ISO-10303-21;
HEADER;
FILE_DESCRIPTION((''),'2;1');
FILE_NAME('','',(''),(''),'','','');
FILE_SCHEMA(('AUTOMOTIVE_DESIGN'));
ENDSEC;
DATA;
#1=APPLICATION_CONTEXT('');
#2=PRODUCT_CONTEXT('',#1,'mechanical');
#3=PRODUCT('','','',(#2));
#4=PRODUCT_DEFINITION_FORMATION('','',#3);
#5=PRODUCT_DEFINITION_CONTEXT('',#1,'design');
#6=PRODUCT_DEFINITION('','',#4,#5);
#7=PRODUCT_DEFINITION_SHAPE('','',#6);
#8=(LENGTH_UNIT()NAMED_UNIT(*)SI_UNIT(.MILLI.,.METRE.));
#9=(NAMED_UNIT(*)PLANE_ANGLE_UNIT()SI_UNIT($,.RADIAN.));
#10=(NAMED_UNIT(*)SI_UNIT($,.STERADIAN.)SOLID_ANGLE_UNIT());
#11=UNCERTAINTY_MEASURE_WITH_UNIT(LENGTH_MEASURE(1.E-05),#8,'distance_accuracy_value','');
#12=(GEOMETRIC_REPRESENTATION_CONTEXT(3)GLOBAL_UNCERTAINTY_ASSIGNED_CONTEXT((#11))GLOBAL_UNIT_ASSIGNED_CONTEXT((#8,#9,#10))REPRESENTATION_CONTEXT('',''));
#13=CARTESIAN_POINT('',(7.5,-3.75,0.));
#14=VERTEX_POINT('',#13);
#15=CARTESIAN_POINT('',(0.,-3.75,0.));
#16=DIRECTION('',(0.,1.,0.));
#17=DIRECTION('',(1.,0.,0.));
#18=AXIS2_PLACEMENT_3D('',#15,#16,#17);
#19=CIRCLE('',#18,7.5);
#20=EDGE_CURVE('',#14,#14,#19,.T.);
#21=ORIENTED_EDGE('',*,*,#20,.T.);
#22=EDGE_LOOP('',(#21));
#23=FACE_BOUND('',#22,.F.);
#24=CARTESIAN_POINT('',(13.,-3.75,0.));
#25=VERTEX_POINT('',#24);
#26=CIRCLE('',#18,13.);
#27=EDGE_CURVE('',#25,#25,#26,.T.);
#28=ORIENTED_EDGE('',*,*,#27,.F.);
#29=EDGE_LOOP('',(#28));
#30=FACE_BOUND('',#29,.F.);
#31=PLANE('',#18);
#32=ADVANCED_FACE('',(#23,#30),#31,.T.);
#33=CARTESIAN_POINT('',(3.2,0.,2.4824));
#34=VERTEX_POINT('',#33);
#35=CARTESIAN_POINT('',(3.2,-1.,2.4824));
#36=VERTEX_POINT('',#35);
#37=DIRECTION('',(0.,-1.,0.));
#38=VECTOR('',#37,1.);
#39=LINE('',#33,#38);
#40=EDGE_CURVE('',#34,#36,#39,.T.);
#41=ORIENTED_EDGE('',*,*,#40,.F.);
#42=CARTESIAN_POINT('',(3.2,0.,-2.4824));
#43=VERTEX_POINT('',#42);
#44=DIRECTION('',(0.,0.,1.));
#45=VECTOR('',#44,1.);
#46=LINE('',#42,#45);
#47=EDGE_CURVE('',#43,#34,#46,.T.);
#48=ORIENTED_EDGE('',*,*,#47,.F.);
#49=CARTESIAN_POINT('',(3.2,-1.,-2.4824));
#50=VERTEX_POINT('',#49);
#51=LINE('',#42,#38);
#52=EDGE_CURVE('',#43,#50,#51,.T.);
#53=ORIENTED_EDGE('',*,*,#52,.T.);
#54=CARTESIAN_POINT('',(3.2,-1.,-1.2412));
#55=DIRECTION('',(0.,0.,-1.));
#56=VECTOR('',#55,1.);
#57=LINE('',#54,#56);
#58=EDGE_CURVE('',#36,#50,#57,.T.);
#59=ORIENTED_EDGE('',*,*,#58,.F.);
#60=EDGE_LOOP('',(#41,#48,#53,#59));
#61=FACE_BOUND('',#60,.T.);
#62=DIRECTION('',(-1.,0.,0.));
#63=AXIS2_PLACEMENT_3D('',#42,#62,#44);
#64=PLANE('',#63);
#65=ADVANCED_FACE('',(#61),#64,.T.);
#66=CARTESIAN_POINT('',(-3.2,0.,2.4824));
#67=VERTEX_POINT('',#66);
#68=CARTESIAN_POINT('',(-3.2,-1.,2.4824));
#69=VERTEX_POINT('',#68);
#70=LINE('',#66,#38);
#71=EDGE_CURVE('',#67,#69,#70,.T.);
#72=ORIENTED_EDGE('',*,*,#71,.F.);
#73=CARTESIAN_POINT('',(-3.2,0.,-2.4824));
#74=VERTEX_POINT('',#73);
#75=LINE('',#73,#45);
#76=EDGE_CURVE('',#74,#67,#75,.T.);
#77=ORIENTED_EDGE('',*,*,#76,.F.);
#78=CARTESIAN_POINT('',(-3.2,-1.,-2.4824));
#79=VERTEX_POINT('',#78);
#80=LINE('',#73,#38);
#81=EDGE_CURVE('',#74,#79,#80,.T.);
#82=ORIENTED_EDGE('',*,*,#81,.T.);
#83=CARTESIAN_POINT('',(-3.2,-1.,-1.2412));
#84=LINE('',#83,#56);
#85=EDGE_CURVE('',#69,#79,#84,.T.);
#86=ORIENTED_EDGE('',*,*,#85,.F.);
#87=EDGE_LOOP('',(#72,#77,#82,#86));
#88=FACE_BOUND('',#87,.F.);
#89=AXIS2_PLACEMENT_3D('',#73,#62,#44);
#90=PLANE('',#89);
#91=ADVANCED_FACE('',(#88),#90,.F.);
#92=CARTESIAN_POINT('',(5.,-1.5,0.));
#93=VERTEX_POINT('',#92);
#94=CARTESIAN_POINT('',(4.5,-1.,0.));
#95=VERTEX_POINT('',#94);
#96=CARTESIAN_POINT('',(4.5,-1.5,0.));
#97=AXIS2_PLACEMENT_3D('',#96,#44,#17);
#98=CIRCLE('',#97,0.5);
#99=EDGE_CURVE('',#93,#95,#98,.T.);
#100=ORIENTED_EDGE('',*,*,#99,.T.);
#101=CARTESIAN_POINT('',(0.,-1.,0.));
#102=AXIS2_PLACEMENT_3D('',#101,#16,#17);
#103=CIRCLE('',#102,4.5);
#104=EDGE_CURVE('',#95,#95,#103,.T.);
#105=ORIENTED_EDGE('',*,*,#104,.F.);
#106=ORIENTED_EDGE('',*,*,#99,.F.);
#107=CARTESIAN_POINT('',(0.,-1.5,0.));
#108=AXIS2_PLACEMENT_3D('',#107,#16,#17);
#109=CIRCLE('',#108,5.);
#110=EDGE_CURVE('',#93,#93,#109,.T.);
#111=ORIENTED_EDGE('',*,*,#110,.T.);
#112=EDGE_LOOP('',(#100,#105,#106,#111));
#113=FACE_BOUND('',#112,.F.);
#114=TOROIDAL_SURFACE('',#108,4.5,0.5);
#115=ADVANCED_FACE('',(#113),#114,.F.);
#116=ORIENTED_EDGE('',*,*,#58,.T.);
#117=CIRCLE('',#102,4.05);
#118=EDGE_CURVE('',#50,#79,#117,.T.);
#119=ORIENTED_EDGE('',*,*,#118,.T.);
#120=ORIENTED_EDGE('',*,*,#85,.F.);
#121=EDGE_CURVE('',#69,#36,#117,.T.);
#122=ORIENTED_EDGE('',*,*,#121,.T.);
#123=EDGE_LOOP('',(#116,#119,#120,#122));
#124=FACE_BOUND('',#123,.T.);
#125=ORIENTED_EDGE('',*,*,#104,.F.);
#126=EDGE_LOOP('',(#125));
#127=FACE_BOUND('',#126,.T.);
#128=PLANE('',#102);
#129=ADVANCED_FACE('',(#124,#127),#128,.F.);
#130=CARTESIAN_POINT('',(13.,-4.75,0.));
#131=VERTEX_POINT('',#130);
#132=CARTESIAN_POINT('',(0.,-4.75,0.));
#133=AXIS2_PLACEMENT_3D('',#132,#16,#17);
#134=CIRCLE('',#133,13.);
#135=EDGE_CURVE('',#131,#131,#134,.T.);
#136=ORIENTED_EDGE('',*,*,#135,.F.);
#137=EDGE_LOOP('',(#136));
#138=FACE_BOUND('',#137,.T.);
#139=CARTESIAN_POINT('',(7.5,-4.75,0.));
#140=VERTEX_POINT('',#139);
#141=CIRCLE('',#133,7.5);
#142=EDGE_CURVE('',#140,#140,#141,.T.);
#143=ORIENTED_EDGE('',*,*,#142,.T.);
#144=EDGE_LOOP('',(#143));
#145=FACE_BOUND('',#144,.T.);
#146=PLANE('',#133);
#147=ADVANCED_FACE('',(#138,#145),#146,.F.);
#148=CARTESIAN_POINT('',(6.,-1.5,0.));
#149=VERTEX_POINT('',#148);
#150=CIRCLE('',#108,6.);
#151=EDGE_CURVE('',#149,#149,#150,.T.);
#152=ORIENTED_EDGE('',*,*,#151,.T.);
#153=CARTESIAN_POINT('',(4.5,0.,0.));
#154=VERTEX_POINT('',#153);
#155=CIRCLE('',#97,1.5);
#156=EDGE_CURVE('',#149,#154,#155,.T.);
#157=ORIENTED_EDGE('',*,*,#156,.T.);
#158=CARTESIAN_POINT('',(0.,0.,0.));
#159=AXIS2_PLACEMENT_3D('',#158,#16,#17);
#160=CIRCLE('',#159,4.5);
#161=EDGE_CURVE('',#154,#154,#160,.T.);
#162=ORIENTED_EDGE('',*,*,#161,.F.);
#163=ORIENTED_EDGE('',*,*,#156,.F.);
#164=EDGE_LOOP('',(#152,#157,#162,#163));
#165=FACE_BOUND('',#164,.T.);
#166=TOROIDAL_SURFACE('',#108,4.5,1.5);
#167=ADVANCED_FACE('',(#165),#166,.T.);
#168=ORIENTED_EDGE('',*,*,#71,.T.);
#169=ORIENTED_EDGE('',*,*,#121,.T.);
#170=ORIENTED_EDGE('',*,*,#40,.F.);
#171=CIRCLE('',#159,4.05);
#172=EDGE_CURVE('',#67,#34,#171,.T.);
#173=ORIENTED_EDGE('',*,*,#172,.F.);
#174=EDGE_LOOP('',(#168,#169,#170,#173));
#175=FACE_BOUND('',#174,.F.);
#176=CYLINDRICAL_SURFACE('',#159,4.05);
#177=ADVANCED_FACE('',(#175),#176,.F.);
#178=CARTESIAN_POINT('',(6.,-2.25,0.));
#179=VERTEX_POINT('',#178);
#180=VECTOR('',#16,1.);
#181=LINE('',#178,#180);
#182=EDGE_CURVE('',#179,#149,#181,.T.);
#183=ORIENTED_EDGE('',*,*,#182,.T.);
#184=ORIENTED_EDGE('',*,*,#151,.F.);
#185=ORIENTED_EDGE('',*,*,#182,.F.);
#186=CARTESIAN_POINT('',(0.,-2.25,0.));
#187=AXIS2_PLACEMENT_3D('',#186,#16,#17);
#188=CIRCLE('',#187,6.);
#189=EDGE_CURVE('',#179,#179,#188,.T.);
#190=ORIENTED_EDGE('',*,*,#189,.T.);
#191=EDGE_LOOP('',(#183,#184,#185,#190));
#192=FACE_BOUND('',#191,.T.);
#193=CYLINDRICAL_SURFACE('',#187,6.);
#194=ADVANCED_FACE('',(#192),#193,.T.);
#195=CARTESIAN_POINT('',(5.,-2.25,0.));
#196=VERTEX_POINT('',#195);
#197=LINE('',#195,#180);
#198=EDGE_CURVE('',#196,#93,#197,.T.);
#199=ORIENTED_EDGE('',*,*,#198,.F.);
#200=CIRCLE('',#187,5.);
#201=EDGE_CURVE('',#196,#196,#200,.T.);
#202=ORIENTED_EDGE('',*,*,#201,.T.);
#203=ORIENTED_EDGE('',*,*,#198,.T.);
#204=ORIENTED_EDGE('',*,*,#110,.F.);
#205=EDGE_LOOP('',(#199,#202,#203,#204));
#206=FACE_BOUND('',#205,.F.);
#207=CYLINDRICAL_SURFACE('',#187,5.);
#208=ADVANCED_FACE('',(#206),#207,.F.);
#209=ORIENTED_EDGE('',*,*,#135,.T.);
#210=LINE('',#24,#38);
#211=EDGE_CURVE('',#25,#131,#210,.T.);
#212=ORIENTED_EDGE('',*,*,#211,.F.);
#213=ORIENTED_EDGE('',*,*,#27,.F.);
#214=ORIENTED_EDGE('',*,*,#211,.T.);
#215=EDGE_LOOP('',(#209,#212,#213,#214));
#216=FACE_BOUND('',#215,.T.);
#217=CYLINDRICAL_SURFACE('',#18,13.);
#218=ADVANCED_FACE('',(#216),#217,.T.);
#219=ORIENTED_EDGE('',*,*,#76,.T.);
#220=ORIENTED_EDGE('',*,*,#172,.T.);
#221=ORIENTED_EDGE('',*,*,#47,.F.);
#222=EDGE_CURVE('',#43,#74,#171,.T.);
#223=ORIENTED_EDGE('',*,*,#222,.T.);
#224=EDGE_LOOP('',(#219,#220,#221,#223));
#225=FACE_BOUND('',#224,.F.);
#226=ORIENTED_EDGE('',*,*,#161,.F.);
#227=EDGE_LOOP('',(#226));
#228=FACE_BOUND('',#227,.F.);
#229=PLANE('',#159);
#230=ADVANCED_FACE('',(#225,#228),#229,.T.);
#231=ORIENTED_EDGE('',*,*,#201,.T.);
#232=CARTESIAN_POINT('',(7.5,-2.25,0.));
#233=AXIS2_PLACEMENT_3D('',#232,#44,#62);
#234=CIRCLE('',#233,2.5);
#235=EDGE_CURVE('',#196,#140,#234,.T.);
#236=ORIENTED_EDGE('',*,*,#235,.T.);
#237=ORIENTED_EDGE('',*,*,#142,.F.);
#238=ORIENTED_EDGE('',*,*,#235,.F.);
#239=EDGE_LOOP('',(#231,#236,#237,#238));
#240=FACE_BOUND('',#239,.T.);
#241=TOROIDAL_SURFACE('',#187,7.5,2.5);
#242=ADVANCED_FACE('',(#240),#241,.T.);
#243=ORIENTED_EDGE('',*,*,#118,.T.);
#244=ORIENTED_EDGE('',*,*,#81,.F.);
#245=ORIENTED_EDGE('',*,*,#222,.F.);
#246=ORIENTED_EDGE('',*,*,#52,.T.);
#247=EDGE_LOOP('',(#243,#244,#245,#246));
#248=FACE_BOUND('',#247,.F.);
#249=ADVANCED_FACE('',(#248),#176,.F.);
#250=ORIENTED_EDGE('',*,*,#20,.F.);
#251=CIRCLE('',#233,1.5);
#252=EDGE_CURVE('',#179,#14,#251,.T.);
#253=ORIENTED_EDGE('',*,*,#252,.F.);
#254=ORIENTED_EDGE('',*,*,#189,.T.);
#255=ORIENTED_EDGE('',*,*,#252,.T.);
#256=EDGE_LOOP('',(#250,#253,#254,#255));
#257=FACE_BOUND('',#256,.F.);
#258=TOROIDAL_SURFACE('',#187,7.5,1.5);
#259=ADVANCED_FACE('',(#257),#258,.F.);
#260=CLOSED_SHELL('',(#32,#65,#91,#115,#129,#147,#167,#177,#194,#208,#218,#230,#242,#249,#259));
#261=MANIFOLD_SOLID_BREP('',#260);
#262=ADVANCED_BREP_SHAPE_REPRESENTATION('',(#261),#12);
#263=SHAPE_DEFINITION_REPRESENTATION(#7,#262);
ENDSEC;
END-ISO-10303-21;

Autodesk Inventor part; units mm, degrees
ref_plane "YZ Plane" through (0, 0, 0) normal (1, 0, 0) x (0, 1, 0)
ref_plane "XZ Plane" through (0, 0, 0) normal (0, 1, 0) x (-1, 0, 0)
ref_plane "XY Plane" through (0, 0, 0) normal (0, 0, 1) x (1, 0, 0)
sketch "Sketch1" plane through (0, 0, 0) normal (0, 0, 1) x (1, 0, 0)
  line L0 (0, 0) -> (4.5, 0)
  line L1 (6, 0) -> (6, -2.25) construction
  line L2 (7.5, -3.75) -> (13, -3.75)
  line L3 (0, 0) -> (0, 5.6294)
  arc A0 (6, -2.25) -> (7.5, -3.75) centre (7.5, -2.25) ccw
  arc A1 (6, -1.5) -> (4.5, 0) centre (4.5, -1.5) ccw
  line L4 (6, -2.25) -> (6, -1.5)
  point P0 (6, -3.75)
  dimension "d0" = 12
  dimension "d1" = 26
  dimension "d2" = 3.75
  dimension "d3" = 1.5
surface revolve "RevolutionSrf1" sketch "Sketch1" angle 360 about axis through (0, 0, 0) along (0, 1, 0) shown no curves L2 A0 L4 A1 L0 L3
thicken "Thicken2" operation add thickness 1 both sides no extend neighbours no toward (0, -1, 0) faces at (0.8521, 0, 1.2345) (5.9182, -1.3879, 0.9618) (5.9805, -2, 0.4828) (7.2922, -3.7458, 1.1851) (11.0407, -3.75, 1.037)
sketch "Sketch3" plane through (0, 0, 0) normal (0, 1, 0) x (1, 0, 0)
  circle A0 centre (0, 0) radius 4.05
  line L0 (-3.2, 2.4824) -> (-3.2, -2.4824)
  line L1 (3.2, 2.4824) -> (3.2, -2.4824)
  dimension "d16" = 8.1
  dimension "d17" = 6.4
extrude "Extrusion2" cut sketch "Sketch3" against normal through all contours L1 A0 L0
equation "\"BendRadius\" = Thickness"
equation "\"BendReliefWidth\" = Thickness"
equation "\"BendReliefDepth\" = 0.5 * Thickness"
equation "\"CornerReliefSize\" = 4 * Thickness"
equation "\"MinimumRemnant\" = 2 * Thickness"
equation "\"TransitionRadius\" = BendRadius"
equation "\"JacobiRadiusSize\" = BendRadius"
equation "\"Thickness\" = 1"
properties part number "404-08" material "Steel, Mild"
